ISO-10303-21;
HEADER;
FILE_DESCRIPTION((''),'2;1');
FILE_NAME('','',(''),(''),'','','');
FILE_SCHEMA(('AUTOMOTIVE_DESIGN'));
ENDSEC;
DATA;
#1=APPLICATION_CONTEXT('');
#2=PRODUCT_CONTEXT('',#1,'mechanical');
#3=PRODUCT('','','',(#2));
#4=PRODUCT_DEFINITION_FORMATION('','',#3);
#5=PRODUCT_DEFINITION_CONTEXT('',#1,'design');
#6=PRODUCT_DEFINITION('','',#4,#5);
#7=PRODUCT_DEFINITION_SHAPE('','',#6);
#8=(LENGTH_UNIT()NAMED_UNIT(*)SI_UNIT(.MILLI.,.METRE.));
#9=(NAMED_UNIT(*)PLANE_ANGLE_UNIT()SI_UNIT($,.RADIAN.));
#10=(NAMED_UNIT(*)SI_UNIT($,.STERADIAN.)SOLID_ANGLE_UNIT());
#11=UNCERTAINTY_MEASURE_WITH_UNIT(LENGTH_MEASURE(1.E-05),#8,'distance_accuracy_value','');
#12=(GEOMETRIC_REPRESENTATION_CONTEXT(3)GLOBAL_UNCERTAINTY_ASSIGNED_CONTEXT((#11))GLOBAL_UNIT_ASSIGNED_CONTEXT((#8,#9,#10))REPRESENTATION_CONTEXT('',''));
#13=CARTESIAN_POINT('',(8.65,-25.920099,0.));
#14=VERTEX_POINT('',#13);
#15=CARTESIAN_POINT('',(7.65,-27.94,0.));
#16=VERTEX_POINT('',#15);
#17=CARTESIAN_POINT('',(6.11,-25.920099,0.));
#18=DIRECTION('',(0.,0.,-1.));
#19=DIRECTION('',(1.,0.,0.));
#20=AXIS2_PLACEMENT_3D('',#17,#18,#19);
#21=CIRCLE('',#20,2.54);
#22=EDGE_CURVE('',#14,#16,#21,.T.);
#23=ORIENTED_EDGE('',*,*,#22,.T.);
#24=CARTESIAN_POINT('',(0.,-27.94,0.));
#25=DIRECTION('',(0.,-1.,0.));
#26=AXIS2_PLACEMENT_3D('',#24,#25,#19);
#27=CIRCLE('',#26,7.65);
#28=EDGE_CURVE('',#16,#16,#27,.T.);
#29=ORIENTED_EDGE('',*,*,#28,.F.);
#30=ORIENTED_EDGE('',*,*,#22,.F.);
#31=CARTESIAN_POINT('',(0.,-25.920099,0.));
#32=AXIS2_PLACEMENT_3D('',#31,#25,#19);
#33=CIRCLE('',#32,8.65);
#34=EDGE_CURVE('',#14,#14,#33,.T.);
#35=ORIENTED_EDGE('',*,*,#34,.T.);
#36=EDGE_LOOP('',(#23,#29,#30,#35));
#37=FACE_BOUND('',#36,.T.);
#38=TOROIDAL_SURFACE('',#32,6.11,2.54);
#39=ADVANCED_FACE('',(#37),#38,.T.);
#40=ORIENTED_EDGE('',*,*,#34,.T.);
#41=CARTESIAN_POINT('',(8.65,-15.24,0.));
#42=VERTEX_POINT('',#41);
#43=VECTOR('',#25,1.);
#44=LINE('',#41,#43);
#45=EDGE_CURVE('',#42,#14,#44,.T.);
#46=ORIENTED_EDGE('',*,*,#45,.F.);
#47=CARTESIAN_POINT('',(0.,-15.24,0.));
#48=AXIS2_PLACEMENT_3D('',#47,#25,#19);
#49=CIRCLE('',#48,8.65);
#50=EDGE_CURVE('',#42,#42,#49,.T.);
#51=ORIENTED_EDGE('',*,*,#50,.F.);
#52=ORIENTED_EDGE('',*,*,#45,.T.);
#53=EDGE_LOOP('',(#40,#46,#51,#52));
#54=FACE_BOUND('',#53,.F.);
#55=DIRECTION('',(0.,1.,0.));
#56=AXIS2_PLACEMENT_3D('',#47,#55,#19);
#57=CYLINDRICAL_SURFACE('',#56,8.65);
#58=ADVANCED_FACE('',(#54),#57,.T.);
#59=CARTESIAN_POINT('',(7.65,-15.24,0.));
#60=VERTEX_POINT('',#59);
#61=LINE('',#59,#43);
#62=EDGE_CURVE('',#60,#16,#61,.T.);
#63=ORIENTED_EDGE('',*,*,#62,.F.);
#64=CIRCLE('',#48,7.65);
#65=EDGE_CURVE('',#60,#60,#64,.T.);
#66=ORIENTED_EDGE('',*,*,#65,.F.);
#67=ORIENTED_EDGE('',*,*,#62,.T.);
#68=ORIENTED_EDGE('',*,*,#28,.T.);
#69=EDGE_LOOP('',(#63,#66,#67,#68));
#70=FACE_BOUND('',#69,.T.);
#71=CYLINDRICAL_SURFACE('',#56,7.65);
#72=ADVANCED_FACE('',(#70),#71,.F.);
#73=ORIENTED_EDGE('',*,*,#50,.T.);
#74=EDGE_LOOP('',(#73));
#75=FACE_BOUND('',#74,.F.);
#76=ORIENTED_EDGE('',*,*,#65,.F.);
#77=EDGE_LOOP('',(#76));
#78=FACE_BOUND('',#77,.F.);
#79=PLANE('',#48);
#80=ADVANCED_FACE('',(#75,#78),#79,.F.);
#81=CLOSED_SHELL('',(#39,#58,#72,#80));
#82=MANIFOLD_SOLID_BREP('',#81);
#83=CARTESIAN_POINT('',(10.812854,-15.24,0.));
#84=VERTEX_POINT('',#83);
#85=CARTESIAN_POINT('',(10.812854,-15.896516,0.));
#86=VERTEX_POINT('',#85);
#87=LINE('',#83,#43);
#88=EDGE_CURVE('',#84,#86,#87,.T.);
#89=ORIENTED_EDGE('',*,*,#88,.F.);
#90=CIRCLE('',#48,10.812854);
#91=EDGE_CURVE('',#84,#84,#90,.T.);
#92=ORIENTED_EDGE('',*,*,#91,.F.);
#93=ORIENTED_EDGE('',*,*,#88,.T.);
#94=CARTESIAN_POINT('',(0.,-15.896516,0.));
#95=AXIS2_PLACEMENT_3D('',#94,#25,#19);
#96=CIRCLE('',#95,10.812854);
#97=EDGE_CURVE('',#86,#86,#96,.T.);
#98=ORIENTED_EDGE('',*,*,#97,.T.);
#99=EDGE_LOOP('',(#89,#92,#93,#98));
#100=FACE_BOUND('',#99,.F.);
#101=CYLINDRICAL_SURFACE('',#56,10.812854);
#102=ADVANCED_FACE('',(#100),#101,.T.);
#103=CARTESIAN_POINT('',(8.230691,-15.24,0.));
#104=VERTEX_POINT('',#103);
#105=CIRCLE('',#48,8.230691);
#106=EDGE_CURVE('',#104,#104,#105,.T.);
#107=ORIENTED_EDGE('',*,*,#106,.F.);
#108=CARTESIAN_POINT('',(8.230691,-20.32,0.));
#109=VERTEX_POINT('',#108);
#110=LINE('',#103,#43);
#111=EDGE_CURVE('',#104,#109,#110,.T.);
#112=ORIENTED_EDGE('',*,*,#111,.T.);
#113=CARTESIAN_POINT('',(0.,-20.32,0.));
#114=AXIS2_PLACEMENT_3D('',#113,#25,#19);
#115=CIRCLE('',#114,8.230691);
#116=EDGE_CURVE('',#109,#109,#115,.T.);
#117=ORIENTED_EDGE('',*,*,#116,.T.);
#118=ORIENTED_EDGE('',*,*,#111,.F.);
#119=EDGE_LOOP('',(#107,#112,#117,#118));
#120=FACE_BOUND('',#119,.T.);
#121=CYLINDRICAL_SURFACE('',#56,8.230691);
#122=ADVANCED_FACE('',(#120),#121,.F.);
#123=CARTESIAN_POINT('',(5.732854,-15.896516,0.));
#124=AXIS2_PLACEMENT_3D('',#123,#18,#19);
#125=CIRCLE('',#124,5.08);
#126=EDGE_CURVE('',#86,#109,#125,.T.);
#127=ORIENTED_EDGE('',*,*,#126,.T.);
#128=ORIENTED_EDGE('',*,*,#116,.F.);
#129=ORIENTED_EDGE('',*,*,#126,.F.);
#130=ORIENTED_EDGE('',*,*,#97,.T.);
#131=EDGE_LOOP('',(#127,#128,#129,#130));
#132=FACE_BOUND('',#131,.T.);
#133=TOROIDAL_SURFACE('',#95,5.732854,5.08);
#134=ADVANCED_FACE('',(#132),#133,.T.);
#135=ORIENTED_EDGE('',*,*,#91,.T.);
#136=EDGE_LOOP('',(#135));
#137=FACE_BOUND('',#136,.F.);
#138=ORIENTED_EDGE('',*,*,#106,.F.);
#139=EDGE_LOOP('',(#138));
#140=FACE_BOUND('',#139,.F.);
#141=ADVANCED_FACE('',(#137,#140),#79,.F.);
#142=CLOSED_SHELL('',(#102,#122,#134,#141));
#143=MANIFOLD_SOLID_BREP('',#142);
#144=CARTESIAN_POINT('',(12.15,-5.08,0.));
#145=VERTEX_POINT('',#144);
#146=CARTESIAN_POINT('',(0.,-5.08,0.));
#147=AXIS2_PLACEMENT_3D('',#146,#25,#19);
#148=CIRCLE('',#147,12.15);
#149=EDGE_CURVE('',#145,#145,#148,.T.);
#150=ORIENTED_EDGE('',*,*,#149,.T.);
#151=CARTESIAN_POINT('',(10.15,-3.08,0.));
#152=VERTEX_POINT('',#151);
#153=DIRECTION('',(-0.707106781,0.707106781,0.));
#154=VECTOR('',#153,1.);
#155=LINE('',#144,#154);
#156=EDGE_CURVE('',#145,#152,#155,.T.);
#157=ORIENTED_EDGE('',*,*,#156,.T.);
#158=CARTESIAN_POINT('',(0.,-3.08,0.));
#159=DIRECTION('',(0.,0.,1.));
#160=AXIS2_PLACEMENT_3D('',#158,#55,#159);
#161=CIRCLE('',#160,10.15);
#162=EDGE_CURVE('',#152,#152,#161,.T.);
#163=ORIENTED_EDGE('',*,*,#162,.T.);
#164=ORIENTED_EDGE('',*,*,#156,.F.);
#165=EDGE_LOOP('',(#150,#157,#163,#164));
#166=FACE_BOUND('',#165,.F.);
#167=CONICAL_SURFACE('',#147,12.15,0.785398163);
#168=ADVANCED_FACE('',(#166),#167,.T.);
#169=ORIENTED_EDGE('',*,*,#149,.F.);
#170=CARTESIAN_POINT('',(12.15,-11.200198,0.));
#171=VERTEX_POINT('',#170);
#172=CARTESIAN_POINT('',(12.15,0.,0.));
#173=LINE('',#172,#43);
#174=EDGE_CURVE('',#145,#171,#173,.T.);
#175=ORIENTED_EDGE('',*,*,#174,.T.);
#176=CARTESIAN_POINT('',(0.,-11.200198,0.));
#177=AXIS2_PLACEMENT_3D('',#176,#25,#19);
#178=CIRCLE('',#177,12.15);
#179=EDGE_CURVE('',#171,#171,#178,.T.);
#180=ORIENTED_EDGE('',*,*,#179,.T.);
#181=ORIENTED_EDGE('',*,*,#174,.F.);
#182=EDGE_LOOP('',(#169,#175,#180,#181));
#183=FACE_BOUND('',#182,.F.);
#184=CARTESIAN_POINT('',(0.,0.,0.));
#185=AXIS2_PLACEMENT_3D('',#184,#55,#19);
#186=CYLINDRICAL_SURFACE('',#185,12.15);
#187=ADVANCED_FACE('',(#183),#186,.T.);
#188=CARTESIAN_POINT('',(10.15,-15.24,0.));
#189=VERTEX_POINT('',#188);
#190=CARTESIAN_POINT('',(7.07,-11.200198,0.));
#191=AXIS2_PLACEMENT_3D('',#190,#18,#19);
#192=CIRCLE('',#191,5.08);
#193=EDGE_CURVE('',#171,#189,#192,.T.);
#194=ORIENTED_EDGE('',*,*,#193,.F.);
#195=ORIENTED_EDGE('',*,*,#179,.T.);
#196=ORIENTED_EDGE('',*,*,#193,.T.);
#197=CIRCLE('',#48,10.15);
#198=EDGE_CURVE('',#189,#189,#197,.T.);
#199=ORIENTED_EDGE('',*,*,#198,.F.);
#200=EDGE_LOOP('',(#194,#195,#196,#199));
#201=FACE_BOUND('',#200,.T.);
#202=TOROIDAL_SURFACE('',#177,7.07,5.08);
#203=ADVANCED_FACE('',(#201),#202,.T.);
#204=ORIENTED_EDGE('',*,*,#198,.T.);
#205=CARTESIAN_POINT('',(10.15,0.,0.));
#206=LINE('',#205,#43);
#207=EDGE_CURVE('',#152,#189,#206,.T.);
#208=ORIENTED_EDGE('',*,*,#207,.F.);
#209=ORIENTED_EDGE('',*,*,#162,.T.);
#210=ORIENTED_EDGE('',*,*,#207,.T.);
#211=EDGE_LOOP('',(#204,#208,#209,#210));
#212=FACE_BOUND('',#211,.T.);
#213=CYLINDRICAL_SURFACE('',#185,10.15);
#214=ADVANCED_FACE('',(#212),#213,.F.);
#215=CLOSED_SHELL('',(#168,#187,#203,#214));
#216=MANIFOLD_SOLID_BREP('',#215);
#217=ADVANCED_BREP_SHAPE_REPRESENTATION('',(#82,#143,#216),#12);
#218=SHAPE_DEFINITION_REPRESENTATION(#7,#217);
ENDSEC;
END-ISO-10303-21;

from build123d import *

# Parameters (mm, degrees)
F0_R     = 12.15
F0_R_2   = 10.15
F1_DEPTH = 15.24
F2_R     = 8.65
F2_R_2   = 7.65
F3_DEPTH = 12.7
F4_R     = 10.8128537481
F4_R_2   = 8.2306905139
F5_DEPTH = 5.08


# Not quite as in the source:
# - a fillet or chamfer that OpenCascade refuses, or shapes differently, is made with other operations: its cross-section is extruded or revolved along the edge and cut away or added


with BuildPart() as f1:
    # F0 (on Front) → F1 (new body)
    with BuildSketch(Plane.XZ):
        Circle(F0_R)
        Circle(F0_R_2, mode=Mode.SUBTRACT)
    extrude(amount=F1_DEPTH)

    # F6: fillet of radius 5.08 on 1 edges, made by hand

    # F6_s1 → F6_t2 (revolve, cut)
    with BuildSketch(Plane.XY):
        with BuildLine():
            ThreePointArc((12.15, -11.2001980247), (11.6226256161, -13.4540835586), (10.15, -15.24))
            Line((10.15, -15.24), (12.15, -15.24))
            Line((12.15, -15.24), (12.15, -11.2001980247))
        make_face()
    revolve(axis=Axis((0, -15.24, 0), (0, -1, 0)), mode=Mode.SUBTRACT)

    # F9: chamfer of 5.08 on 1 edges, made by hand

    # F9_s1 → F9_t2 (revolve, cut)
    with BuildSketch(Plane.XY):
        Polygon((12.15, -5.08), (7.07, 0), (12.15, 0), align=None)
    revolve(axis=Axis((0, 0, 0), (0, -1, 0)), mode=Mode.SUBTRACT)


with BuildPart() as f3:
    # F2 (on face) → F3 (new body)
    with BuildSketch(Plane.XZ.offset(15.24)):
        Circle(F2_R)
        Circle(F2_R_2, mode=Mode.SUBTRACT)
    extrude(amount=F3_DEPTH)

    # F8: fillet of radius 2.54 on 1 edges, made by hand

    # F8_s1 → F8_t2 (revolve, cut)
    with BuildSketch(Plane.XY):
        with BuildLine():
            ThreePointArc((8.65, -25.9200990123), (8.386312808, -27.0470417793), (7.65, -27.94))
            Line((7.65, -27.94), (8.65, -27.94))
            Line((8.65, -27.94), (8.65, -25.9200990123))
        make_face()
    revolve(axis=Axis((0, -27.94, 0), (0, -1, 0)), mode=Mode.SUBTRACT)


with BuildPart() as f5:
    # F4 (on face) → F5 (new body)
    with BuildSketch(Plane.XZ.offset(15.24)):
        Circle(F4_R)
        Circle(F4_R_2, mode=Mode.SUBTRACT)
    extrude(amount=F5_DEPTH)

    # F7: fillet of radius 5.08 on 1 edges, made by hand

    # F7_s1 → F7_t2 (revolve, cut)
    with BuildSketch(Plane.XY):
        with BuildLine():
            ThreePointArc((10.8128537481, -15.8965159104), (10.1200744383, -18.457510759), (8.2306905139, -20.32))
            Line((8.2306905139, -20.32), (10.8128537481, -20.32))
            Line((10.8128537481, -20.32), (10.8128537481, -15.8965159104))
        make_face()
    revolve(axis=Axis((0, -20.32, 0), (0, -1, 0)), mode=Mode.SUBTRACT)


solid = Compound([f1.part, f3.part, f5.part])
